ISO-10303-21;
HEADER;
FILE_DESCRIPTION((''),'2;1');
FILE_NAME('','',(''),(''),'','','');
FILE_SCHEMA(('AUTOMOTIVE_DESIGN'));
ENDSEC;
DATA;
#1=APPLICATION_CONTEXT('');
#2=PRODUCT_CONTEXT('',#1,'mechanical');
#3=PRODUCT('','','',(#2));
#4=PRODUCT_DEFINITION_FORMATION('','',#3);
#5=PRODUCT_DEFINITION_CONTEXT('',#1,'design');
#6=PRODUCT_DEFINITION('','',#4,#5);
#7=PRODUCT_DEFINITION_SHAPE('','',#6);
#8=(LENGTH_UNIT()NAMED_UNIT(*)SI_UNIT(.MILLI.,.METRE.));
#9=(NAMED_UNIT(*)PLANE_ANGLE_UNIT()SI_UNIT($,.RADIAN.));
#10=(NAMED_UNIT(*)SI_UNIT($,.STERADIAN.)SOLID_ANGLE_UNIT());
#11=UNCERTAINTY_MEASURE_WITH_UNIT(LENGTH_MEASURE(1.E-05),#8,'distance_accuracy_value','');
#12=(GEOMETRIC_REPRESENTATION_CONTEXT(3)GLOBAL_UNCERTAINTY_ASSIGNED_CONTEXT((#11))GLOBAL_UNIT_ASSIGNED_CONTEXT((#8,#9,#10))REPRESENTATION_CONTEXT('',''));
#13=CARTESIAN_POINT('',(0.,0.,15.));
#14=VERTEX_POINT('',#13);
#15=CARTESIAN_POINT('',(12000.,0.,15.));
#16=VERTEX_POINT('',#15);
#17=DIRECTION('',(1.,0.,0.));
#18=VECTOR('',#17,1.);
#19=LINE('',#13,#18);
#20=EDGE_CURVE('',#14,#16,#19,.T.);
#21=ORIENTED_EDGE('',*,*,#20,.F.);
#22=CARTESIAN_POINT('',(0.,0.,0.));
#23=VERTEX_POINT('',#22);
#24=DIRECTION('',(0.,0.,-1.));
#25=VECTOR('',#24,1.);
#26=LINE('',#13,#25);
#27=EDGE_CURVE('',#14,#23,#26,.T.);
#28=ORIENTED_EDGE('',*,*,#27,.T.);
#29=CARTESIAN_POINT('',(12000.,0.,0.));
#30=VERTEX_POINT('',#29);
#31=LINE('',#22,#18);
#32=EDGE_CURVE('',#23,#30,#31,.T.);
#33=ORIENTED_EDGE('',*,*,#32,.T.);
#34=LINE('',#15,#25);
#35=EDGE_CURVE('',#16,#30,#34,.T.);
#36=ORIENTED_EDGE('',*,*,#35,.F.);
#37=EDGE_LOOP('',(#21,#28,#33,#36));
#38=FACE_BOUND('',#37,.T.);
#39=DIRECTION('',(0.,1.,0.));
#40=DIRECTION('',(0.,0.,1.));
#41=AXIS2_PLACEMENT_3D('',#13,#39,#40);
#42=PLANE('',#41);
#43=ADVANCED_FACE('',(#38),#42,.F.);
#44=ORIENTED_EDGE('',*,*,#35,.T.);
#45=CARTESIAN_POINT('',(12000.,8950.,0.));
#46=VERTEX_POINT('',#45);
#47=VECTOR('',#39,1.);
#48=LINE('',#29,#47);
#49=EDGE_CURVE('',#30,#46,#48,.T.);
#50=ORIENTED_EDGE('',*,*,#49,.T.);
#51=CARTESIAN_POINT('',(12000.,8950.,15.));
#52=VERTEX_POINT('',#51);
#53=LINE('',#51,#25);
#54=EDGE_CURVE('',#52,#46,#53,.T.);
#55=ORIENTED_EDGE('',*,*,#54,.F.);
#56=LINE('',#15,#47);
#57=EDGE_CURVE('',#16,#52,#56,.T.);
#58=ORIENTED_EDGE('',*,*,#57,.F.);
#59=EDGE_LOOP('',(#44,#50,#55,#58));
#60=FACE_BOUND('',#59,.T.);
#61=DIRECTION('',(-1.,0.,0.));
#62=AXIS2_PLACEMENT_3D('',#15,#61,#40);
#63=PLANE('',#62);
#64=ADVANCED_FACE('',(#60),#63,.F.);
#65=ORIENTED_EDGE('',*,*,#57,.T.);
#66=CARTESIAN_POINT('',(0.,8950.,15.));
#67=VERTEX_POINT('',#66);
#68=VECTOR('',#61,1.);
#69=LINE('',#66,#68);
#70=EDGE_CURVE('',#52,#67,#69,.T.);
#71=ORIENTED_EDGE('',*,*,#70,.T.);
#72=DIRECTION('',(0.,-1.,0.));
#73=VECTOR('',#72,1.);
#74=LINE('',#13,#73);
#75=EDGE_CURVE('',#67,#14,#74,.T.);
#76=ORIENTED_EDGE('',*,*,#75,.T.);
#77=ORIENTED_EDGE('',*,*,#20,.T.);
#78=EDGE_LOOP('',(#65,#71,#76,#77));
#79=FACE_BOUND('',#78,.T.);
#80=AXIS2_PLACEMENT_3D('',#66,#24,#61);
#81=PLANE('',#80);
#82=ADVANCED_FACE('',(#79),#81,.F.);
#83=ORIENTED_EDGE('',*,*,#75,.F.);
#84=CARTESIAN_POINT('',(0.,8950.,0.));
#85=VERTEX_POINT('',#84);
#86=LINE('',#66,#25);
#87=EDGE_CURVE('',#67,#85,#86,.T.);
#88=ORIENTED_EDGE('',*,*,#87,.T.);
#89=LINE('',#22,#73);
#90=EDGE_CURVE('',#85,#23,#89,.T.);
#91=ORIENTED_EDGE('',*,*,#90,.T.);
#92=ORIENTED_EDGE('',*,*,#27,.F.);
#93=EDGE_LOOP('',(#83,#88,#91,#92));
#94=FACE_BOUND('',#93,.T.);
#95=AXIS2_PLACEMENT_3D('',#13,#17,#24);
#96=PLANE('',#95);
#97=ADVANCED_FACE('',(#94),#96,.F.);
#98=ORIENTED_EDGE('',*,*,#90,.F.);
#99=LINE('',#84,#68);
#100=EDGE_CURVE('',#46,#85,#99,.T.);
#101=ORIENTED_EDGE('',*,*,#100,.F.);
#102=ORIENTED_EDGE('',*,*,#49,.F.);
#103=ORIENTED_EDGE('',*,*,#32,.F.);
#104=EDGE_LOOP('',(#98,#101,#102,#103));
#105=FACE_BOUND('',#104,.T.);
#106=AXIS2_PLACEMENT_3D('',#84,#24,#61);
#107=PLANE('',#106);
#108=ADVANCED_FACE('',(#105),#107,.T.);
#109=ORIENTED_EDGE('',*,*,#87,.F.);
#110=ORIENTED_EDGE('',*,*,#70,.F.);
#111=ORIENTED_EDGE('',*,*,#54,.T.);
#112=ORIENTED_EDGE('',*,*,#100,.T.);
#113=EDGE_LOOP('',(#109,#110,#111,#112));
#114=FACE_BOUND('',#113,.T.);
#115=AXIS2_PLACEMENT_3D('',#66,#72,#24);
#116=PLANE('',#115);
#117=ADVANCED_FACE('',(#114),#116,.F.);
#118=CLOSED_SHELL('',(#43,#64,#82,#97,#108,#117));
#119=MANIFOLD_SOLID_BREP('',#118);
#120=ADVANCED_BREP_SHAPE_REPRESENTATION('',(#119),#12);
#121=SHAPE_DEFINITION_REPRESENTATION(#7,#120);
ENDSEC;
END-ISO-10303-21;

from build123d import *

# Parameters (mm, degrees)
SKETCH2_W          = 12000
SKETCH2_H          = 8950
BASE_FLANGE1_DEPTH = 15


# Sheet-metal steps are written as plain solids
with BuildPart() as part:
    # Sketch2 → Base-Flange1 (new body)
    with BuildSketch(Plane.XY):
        with Locations((6000, 4475)):
            Rectangle(SKETCH2_W, SKETCH2_H)
    extrude(amount=BASE_FLANGE1_DEPTH)


solid = part.part
